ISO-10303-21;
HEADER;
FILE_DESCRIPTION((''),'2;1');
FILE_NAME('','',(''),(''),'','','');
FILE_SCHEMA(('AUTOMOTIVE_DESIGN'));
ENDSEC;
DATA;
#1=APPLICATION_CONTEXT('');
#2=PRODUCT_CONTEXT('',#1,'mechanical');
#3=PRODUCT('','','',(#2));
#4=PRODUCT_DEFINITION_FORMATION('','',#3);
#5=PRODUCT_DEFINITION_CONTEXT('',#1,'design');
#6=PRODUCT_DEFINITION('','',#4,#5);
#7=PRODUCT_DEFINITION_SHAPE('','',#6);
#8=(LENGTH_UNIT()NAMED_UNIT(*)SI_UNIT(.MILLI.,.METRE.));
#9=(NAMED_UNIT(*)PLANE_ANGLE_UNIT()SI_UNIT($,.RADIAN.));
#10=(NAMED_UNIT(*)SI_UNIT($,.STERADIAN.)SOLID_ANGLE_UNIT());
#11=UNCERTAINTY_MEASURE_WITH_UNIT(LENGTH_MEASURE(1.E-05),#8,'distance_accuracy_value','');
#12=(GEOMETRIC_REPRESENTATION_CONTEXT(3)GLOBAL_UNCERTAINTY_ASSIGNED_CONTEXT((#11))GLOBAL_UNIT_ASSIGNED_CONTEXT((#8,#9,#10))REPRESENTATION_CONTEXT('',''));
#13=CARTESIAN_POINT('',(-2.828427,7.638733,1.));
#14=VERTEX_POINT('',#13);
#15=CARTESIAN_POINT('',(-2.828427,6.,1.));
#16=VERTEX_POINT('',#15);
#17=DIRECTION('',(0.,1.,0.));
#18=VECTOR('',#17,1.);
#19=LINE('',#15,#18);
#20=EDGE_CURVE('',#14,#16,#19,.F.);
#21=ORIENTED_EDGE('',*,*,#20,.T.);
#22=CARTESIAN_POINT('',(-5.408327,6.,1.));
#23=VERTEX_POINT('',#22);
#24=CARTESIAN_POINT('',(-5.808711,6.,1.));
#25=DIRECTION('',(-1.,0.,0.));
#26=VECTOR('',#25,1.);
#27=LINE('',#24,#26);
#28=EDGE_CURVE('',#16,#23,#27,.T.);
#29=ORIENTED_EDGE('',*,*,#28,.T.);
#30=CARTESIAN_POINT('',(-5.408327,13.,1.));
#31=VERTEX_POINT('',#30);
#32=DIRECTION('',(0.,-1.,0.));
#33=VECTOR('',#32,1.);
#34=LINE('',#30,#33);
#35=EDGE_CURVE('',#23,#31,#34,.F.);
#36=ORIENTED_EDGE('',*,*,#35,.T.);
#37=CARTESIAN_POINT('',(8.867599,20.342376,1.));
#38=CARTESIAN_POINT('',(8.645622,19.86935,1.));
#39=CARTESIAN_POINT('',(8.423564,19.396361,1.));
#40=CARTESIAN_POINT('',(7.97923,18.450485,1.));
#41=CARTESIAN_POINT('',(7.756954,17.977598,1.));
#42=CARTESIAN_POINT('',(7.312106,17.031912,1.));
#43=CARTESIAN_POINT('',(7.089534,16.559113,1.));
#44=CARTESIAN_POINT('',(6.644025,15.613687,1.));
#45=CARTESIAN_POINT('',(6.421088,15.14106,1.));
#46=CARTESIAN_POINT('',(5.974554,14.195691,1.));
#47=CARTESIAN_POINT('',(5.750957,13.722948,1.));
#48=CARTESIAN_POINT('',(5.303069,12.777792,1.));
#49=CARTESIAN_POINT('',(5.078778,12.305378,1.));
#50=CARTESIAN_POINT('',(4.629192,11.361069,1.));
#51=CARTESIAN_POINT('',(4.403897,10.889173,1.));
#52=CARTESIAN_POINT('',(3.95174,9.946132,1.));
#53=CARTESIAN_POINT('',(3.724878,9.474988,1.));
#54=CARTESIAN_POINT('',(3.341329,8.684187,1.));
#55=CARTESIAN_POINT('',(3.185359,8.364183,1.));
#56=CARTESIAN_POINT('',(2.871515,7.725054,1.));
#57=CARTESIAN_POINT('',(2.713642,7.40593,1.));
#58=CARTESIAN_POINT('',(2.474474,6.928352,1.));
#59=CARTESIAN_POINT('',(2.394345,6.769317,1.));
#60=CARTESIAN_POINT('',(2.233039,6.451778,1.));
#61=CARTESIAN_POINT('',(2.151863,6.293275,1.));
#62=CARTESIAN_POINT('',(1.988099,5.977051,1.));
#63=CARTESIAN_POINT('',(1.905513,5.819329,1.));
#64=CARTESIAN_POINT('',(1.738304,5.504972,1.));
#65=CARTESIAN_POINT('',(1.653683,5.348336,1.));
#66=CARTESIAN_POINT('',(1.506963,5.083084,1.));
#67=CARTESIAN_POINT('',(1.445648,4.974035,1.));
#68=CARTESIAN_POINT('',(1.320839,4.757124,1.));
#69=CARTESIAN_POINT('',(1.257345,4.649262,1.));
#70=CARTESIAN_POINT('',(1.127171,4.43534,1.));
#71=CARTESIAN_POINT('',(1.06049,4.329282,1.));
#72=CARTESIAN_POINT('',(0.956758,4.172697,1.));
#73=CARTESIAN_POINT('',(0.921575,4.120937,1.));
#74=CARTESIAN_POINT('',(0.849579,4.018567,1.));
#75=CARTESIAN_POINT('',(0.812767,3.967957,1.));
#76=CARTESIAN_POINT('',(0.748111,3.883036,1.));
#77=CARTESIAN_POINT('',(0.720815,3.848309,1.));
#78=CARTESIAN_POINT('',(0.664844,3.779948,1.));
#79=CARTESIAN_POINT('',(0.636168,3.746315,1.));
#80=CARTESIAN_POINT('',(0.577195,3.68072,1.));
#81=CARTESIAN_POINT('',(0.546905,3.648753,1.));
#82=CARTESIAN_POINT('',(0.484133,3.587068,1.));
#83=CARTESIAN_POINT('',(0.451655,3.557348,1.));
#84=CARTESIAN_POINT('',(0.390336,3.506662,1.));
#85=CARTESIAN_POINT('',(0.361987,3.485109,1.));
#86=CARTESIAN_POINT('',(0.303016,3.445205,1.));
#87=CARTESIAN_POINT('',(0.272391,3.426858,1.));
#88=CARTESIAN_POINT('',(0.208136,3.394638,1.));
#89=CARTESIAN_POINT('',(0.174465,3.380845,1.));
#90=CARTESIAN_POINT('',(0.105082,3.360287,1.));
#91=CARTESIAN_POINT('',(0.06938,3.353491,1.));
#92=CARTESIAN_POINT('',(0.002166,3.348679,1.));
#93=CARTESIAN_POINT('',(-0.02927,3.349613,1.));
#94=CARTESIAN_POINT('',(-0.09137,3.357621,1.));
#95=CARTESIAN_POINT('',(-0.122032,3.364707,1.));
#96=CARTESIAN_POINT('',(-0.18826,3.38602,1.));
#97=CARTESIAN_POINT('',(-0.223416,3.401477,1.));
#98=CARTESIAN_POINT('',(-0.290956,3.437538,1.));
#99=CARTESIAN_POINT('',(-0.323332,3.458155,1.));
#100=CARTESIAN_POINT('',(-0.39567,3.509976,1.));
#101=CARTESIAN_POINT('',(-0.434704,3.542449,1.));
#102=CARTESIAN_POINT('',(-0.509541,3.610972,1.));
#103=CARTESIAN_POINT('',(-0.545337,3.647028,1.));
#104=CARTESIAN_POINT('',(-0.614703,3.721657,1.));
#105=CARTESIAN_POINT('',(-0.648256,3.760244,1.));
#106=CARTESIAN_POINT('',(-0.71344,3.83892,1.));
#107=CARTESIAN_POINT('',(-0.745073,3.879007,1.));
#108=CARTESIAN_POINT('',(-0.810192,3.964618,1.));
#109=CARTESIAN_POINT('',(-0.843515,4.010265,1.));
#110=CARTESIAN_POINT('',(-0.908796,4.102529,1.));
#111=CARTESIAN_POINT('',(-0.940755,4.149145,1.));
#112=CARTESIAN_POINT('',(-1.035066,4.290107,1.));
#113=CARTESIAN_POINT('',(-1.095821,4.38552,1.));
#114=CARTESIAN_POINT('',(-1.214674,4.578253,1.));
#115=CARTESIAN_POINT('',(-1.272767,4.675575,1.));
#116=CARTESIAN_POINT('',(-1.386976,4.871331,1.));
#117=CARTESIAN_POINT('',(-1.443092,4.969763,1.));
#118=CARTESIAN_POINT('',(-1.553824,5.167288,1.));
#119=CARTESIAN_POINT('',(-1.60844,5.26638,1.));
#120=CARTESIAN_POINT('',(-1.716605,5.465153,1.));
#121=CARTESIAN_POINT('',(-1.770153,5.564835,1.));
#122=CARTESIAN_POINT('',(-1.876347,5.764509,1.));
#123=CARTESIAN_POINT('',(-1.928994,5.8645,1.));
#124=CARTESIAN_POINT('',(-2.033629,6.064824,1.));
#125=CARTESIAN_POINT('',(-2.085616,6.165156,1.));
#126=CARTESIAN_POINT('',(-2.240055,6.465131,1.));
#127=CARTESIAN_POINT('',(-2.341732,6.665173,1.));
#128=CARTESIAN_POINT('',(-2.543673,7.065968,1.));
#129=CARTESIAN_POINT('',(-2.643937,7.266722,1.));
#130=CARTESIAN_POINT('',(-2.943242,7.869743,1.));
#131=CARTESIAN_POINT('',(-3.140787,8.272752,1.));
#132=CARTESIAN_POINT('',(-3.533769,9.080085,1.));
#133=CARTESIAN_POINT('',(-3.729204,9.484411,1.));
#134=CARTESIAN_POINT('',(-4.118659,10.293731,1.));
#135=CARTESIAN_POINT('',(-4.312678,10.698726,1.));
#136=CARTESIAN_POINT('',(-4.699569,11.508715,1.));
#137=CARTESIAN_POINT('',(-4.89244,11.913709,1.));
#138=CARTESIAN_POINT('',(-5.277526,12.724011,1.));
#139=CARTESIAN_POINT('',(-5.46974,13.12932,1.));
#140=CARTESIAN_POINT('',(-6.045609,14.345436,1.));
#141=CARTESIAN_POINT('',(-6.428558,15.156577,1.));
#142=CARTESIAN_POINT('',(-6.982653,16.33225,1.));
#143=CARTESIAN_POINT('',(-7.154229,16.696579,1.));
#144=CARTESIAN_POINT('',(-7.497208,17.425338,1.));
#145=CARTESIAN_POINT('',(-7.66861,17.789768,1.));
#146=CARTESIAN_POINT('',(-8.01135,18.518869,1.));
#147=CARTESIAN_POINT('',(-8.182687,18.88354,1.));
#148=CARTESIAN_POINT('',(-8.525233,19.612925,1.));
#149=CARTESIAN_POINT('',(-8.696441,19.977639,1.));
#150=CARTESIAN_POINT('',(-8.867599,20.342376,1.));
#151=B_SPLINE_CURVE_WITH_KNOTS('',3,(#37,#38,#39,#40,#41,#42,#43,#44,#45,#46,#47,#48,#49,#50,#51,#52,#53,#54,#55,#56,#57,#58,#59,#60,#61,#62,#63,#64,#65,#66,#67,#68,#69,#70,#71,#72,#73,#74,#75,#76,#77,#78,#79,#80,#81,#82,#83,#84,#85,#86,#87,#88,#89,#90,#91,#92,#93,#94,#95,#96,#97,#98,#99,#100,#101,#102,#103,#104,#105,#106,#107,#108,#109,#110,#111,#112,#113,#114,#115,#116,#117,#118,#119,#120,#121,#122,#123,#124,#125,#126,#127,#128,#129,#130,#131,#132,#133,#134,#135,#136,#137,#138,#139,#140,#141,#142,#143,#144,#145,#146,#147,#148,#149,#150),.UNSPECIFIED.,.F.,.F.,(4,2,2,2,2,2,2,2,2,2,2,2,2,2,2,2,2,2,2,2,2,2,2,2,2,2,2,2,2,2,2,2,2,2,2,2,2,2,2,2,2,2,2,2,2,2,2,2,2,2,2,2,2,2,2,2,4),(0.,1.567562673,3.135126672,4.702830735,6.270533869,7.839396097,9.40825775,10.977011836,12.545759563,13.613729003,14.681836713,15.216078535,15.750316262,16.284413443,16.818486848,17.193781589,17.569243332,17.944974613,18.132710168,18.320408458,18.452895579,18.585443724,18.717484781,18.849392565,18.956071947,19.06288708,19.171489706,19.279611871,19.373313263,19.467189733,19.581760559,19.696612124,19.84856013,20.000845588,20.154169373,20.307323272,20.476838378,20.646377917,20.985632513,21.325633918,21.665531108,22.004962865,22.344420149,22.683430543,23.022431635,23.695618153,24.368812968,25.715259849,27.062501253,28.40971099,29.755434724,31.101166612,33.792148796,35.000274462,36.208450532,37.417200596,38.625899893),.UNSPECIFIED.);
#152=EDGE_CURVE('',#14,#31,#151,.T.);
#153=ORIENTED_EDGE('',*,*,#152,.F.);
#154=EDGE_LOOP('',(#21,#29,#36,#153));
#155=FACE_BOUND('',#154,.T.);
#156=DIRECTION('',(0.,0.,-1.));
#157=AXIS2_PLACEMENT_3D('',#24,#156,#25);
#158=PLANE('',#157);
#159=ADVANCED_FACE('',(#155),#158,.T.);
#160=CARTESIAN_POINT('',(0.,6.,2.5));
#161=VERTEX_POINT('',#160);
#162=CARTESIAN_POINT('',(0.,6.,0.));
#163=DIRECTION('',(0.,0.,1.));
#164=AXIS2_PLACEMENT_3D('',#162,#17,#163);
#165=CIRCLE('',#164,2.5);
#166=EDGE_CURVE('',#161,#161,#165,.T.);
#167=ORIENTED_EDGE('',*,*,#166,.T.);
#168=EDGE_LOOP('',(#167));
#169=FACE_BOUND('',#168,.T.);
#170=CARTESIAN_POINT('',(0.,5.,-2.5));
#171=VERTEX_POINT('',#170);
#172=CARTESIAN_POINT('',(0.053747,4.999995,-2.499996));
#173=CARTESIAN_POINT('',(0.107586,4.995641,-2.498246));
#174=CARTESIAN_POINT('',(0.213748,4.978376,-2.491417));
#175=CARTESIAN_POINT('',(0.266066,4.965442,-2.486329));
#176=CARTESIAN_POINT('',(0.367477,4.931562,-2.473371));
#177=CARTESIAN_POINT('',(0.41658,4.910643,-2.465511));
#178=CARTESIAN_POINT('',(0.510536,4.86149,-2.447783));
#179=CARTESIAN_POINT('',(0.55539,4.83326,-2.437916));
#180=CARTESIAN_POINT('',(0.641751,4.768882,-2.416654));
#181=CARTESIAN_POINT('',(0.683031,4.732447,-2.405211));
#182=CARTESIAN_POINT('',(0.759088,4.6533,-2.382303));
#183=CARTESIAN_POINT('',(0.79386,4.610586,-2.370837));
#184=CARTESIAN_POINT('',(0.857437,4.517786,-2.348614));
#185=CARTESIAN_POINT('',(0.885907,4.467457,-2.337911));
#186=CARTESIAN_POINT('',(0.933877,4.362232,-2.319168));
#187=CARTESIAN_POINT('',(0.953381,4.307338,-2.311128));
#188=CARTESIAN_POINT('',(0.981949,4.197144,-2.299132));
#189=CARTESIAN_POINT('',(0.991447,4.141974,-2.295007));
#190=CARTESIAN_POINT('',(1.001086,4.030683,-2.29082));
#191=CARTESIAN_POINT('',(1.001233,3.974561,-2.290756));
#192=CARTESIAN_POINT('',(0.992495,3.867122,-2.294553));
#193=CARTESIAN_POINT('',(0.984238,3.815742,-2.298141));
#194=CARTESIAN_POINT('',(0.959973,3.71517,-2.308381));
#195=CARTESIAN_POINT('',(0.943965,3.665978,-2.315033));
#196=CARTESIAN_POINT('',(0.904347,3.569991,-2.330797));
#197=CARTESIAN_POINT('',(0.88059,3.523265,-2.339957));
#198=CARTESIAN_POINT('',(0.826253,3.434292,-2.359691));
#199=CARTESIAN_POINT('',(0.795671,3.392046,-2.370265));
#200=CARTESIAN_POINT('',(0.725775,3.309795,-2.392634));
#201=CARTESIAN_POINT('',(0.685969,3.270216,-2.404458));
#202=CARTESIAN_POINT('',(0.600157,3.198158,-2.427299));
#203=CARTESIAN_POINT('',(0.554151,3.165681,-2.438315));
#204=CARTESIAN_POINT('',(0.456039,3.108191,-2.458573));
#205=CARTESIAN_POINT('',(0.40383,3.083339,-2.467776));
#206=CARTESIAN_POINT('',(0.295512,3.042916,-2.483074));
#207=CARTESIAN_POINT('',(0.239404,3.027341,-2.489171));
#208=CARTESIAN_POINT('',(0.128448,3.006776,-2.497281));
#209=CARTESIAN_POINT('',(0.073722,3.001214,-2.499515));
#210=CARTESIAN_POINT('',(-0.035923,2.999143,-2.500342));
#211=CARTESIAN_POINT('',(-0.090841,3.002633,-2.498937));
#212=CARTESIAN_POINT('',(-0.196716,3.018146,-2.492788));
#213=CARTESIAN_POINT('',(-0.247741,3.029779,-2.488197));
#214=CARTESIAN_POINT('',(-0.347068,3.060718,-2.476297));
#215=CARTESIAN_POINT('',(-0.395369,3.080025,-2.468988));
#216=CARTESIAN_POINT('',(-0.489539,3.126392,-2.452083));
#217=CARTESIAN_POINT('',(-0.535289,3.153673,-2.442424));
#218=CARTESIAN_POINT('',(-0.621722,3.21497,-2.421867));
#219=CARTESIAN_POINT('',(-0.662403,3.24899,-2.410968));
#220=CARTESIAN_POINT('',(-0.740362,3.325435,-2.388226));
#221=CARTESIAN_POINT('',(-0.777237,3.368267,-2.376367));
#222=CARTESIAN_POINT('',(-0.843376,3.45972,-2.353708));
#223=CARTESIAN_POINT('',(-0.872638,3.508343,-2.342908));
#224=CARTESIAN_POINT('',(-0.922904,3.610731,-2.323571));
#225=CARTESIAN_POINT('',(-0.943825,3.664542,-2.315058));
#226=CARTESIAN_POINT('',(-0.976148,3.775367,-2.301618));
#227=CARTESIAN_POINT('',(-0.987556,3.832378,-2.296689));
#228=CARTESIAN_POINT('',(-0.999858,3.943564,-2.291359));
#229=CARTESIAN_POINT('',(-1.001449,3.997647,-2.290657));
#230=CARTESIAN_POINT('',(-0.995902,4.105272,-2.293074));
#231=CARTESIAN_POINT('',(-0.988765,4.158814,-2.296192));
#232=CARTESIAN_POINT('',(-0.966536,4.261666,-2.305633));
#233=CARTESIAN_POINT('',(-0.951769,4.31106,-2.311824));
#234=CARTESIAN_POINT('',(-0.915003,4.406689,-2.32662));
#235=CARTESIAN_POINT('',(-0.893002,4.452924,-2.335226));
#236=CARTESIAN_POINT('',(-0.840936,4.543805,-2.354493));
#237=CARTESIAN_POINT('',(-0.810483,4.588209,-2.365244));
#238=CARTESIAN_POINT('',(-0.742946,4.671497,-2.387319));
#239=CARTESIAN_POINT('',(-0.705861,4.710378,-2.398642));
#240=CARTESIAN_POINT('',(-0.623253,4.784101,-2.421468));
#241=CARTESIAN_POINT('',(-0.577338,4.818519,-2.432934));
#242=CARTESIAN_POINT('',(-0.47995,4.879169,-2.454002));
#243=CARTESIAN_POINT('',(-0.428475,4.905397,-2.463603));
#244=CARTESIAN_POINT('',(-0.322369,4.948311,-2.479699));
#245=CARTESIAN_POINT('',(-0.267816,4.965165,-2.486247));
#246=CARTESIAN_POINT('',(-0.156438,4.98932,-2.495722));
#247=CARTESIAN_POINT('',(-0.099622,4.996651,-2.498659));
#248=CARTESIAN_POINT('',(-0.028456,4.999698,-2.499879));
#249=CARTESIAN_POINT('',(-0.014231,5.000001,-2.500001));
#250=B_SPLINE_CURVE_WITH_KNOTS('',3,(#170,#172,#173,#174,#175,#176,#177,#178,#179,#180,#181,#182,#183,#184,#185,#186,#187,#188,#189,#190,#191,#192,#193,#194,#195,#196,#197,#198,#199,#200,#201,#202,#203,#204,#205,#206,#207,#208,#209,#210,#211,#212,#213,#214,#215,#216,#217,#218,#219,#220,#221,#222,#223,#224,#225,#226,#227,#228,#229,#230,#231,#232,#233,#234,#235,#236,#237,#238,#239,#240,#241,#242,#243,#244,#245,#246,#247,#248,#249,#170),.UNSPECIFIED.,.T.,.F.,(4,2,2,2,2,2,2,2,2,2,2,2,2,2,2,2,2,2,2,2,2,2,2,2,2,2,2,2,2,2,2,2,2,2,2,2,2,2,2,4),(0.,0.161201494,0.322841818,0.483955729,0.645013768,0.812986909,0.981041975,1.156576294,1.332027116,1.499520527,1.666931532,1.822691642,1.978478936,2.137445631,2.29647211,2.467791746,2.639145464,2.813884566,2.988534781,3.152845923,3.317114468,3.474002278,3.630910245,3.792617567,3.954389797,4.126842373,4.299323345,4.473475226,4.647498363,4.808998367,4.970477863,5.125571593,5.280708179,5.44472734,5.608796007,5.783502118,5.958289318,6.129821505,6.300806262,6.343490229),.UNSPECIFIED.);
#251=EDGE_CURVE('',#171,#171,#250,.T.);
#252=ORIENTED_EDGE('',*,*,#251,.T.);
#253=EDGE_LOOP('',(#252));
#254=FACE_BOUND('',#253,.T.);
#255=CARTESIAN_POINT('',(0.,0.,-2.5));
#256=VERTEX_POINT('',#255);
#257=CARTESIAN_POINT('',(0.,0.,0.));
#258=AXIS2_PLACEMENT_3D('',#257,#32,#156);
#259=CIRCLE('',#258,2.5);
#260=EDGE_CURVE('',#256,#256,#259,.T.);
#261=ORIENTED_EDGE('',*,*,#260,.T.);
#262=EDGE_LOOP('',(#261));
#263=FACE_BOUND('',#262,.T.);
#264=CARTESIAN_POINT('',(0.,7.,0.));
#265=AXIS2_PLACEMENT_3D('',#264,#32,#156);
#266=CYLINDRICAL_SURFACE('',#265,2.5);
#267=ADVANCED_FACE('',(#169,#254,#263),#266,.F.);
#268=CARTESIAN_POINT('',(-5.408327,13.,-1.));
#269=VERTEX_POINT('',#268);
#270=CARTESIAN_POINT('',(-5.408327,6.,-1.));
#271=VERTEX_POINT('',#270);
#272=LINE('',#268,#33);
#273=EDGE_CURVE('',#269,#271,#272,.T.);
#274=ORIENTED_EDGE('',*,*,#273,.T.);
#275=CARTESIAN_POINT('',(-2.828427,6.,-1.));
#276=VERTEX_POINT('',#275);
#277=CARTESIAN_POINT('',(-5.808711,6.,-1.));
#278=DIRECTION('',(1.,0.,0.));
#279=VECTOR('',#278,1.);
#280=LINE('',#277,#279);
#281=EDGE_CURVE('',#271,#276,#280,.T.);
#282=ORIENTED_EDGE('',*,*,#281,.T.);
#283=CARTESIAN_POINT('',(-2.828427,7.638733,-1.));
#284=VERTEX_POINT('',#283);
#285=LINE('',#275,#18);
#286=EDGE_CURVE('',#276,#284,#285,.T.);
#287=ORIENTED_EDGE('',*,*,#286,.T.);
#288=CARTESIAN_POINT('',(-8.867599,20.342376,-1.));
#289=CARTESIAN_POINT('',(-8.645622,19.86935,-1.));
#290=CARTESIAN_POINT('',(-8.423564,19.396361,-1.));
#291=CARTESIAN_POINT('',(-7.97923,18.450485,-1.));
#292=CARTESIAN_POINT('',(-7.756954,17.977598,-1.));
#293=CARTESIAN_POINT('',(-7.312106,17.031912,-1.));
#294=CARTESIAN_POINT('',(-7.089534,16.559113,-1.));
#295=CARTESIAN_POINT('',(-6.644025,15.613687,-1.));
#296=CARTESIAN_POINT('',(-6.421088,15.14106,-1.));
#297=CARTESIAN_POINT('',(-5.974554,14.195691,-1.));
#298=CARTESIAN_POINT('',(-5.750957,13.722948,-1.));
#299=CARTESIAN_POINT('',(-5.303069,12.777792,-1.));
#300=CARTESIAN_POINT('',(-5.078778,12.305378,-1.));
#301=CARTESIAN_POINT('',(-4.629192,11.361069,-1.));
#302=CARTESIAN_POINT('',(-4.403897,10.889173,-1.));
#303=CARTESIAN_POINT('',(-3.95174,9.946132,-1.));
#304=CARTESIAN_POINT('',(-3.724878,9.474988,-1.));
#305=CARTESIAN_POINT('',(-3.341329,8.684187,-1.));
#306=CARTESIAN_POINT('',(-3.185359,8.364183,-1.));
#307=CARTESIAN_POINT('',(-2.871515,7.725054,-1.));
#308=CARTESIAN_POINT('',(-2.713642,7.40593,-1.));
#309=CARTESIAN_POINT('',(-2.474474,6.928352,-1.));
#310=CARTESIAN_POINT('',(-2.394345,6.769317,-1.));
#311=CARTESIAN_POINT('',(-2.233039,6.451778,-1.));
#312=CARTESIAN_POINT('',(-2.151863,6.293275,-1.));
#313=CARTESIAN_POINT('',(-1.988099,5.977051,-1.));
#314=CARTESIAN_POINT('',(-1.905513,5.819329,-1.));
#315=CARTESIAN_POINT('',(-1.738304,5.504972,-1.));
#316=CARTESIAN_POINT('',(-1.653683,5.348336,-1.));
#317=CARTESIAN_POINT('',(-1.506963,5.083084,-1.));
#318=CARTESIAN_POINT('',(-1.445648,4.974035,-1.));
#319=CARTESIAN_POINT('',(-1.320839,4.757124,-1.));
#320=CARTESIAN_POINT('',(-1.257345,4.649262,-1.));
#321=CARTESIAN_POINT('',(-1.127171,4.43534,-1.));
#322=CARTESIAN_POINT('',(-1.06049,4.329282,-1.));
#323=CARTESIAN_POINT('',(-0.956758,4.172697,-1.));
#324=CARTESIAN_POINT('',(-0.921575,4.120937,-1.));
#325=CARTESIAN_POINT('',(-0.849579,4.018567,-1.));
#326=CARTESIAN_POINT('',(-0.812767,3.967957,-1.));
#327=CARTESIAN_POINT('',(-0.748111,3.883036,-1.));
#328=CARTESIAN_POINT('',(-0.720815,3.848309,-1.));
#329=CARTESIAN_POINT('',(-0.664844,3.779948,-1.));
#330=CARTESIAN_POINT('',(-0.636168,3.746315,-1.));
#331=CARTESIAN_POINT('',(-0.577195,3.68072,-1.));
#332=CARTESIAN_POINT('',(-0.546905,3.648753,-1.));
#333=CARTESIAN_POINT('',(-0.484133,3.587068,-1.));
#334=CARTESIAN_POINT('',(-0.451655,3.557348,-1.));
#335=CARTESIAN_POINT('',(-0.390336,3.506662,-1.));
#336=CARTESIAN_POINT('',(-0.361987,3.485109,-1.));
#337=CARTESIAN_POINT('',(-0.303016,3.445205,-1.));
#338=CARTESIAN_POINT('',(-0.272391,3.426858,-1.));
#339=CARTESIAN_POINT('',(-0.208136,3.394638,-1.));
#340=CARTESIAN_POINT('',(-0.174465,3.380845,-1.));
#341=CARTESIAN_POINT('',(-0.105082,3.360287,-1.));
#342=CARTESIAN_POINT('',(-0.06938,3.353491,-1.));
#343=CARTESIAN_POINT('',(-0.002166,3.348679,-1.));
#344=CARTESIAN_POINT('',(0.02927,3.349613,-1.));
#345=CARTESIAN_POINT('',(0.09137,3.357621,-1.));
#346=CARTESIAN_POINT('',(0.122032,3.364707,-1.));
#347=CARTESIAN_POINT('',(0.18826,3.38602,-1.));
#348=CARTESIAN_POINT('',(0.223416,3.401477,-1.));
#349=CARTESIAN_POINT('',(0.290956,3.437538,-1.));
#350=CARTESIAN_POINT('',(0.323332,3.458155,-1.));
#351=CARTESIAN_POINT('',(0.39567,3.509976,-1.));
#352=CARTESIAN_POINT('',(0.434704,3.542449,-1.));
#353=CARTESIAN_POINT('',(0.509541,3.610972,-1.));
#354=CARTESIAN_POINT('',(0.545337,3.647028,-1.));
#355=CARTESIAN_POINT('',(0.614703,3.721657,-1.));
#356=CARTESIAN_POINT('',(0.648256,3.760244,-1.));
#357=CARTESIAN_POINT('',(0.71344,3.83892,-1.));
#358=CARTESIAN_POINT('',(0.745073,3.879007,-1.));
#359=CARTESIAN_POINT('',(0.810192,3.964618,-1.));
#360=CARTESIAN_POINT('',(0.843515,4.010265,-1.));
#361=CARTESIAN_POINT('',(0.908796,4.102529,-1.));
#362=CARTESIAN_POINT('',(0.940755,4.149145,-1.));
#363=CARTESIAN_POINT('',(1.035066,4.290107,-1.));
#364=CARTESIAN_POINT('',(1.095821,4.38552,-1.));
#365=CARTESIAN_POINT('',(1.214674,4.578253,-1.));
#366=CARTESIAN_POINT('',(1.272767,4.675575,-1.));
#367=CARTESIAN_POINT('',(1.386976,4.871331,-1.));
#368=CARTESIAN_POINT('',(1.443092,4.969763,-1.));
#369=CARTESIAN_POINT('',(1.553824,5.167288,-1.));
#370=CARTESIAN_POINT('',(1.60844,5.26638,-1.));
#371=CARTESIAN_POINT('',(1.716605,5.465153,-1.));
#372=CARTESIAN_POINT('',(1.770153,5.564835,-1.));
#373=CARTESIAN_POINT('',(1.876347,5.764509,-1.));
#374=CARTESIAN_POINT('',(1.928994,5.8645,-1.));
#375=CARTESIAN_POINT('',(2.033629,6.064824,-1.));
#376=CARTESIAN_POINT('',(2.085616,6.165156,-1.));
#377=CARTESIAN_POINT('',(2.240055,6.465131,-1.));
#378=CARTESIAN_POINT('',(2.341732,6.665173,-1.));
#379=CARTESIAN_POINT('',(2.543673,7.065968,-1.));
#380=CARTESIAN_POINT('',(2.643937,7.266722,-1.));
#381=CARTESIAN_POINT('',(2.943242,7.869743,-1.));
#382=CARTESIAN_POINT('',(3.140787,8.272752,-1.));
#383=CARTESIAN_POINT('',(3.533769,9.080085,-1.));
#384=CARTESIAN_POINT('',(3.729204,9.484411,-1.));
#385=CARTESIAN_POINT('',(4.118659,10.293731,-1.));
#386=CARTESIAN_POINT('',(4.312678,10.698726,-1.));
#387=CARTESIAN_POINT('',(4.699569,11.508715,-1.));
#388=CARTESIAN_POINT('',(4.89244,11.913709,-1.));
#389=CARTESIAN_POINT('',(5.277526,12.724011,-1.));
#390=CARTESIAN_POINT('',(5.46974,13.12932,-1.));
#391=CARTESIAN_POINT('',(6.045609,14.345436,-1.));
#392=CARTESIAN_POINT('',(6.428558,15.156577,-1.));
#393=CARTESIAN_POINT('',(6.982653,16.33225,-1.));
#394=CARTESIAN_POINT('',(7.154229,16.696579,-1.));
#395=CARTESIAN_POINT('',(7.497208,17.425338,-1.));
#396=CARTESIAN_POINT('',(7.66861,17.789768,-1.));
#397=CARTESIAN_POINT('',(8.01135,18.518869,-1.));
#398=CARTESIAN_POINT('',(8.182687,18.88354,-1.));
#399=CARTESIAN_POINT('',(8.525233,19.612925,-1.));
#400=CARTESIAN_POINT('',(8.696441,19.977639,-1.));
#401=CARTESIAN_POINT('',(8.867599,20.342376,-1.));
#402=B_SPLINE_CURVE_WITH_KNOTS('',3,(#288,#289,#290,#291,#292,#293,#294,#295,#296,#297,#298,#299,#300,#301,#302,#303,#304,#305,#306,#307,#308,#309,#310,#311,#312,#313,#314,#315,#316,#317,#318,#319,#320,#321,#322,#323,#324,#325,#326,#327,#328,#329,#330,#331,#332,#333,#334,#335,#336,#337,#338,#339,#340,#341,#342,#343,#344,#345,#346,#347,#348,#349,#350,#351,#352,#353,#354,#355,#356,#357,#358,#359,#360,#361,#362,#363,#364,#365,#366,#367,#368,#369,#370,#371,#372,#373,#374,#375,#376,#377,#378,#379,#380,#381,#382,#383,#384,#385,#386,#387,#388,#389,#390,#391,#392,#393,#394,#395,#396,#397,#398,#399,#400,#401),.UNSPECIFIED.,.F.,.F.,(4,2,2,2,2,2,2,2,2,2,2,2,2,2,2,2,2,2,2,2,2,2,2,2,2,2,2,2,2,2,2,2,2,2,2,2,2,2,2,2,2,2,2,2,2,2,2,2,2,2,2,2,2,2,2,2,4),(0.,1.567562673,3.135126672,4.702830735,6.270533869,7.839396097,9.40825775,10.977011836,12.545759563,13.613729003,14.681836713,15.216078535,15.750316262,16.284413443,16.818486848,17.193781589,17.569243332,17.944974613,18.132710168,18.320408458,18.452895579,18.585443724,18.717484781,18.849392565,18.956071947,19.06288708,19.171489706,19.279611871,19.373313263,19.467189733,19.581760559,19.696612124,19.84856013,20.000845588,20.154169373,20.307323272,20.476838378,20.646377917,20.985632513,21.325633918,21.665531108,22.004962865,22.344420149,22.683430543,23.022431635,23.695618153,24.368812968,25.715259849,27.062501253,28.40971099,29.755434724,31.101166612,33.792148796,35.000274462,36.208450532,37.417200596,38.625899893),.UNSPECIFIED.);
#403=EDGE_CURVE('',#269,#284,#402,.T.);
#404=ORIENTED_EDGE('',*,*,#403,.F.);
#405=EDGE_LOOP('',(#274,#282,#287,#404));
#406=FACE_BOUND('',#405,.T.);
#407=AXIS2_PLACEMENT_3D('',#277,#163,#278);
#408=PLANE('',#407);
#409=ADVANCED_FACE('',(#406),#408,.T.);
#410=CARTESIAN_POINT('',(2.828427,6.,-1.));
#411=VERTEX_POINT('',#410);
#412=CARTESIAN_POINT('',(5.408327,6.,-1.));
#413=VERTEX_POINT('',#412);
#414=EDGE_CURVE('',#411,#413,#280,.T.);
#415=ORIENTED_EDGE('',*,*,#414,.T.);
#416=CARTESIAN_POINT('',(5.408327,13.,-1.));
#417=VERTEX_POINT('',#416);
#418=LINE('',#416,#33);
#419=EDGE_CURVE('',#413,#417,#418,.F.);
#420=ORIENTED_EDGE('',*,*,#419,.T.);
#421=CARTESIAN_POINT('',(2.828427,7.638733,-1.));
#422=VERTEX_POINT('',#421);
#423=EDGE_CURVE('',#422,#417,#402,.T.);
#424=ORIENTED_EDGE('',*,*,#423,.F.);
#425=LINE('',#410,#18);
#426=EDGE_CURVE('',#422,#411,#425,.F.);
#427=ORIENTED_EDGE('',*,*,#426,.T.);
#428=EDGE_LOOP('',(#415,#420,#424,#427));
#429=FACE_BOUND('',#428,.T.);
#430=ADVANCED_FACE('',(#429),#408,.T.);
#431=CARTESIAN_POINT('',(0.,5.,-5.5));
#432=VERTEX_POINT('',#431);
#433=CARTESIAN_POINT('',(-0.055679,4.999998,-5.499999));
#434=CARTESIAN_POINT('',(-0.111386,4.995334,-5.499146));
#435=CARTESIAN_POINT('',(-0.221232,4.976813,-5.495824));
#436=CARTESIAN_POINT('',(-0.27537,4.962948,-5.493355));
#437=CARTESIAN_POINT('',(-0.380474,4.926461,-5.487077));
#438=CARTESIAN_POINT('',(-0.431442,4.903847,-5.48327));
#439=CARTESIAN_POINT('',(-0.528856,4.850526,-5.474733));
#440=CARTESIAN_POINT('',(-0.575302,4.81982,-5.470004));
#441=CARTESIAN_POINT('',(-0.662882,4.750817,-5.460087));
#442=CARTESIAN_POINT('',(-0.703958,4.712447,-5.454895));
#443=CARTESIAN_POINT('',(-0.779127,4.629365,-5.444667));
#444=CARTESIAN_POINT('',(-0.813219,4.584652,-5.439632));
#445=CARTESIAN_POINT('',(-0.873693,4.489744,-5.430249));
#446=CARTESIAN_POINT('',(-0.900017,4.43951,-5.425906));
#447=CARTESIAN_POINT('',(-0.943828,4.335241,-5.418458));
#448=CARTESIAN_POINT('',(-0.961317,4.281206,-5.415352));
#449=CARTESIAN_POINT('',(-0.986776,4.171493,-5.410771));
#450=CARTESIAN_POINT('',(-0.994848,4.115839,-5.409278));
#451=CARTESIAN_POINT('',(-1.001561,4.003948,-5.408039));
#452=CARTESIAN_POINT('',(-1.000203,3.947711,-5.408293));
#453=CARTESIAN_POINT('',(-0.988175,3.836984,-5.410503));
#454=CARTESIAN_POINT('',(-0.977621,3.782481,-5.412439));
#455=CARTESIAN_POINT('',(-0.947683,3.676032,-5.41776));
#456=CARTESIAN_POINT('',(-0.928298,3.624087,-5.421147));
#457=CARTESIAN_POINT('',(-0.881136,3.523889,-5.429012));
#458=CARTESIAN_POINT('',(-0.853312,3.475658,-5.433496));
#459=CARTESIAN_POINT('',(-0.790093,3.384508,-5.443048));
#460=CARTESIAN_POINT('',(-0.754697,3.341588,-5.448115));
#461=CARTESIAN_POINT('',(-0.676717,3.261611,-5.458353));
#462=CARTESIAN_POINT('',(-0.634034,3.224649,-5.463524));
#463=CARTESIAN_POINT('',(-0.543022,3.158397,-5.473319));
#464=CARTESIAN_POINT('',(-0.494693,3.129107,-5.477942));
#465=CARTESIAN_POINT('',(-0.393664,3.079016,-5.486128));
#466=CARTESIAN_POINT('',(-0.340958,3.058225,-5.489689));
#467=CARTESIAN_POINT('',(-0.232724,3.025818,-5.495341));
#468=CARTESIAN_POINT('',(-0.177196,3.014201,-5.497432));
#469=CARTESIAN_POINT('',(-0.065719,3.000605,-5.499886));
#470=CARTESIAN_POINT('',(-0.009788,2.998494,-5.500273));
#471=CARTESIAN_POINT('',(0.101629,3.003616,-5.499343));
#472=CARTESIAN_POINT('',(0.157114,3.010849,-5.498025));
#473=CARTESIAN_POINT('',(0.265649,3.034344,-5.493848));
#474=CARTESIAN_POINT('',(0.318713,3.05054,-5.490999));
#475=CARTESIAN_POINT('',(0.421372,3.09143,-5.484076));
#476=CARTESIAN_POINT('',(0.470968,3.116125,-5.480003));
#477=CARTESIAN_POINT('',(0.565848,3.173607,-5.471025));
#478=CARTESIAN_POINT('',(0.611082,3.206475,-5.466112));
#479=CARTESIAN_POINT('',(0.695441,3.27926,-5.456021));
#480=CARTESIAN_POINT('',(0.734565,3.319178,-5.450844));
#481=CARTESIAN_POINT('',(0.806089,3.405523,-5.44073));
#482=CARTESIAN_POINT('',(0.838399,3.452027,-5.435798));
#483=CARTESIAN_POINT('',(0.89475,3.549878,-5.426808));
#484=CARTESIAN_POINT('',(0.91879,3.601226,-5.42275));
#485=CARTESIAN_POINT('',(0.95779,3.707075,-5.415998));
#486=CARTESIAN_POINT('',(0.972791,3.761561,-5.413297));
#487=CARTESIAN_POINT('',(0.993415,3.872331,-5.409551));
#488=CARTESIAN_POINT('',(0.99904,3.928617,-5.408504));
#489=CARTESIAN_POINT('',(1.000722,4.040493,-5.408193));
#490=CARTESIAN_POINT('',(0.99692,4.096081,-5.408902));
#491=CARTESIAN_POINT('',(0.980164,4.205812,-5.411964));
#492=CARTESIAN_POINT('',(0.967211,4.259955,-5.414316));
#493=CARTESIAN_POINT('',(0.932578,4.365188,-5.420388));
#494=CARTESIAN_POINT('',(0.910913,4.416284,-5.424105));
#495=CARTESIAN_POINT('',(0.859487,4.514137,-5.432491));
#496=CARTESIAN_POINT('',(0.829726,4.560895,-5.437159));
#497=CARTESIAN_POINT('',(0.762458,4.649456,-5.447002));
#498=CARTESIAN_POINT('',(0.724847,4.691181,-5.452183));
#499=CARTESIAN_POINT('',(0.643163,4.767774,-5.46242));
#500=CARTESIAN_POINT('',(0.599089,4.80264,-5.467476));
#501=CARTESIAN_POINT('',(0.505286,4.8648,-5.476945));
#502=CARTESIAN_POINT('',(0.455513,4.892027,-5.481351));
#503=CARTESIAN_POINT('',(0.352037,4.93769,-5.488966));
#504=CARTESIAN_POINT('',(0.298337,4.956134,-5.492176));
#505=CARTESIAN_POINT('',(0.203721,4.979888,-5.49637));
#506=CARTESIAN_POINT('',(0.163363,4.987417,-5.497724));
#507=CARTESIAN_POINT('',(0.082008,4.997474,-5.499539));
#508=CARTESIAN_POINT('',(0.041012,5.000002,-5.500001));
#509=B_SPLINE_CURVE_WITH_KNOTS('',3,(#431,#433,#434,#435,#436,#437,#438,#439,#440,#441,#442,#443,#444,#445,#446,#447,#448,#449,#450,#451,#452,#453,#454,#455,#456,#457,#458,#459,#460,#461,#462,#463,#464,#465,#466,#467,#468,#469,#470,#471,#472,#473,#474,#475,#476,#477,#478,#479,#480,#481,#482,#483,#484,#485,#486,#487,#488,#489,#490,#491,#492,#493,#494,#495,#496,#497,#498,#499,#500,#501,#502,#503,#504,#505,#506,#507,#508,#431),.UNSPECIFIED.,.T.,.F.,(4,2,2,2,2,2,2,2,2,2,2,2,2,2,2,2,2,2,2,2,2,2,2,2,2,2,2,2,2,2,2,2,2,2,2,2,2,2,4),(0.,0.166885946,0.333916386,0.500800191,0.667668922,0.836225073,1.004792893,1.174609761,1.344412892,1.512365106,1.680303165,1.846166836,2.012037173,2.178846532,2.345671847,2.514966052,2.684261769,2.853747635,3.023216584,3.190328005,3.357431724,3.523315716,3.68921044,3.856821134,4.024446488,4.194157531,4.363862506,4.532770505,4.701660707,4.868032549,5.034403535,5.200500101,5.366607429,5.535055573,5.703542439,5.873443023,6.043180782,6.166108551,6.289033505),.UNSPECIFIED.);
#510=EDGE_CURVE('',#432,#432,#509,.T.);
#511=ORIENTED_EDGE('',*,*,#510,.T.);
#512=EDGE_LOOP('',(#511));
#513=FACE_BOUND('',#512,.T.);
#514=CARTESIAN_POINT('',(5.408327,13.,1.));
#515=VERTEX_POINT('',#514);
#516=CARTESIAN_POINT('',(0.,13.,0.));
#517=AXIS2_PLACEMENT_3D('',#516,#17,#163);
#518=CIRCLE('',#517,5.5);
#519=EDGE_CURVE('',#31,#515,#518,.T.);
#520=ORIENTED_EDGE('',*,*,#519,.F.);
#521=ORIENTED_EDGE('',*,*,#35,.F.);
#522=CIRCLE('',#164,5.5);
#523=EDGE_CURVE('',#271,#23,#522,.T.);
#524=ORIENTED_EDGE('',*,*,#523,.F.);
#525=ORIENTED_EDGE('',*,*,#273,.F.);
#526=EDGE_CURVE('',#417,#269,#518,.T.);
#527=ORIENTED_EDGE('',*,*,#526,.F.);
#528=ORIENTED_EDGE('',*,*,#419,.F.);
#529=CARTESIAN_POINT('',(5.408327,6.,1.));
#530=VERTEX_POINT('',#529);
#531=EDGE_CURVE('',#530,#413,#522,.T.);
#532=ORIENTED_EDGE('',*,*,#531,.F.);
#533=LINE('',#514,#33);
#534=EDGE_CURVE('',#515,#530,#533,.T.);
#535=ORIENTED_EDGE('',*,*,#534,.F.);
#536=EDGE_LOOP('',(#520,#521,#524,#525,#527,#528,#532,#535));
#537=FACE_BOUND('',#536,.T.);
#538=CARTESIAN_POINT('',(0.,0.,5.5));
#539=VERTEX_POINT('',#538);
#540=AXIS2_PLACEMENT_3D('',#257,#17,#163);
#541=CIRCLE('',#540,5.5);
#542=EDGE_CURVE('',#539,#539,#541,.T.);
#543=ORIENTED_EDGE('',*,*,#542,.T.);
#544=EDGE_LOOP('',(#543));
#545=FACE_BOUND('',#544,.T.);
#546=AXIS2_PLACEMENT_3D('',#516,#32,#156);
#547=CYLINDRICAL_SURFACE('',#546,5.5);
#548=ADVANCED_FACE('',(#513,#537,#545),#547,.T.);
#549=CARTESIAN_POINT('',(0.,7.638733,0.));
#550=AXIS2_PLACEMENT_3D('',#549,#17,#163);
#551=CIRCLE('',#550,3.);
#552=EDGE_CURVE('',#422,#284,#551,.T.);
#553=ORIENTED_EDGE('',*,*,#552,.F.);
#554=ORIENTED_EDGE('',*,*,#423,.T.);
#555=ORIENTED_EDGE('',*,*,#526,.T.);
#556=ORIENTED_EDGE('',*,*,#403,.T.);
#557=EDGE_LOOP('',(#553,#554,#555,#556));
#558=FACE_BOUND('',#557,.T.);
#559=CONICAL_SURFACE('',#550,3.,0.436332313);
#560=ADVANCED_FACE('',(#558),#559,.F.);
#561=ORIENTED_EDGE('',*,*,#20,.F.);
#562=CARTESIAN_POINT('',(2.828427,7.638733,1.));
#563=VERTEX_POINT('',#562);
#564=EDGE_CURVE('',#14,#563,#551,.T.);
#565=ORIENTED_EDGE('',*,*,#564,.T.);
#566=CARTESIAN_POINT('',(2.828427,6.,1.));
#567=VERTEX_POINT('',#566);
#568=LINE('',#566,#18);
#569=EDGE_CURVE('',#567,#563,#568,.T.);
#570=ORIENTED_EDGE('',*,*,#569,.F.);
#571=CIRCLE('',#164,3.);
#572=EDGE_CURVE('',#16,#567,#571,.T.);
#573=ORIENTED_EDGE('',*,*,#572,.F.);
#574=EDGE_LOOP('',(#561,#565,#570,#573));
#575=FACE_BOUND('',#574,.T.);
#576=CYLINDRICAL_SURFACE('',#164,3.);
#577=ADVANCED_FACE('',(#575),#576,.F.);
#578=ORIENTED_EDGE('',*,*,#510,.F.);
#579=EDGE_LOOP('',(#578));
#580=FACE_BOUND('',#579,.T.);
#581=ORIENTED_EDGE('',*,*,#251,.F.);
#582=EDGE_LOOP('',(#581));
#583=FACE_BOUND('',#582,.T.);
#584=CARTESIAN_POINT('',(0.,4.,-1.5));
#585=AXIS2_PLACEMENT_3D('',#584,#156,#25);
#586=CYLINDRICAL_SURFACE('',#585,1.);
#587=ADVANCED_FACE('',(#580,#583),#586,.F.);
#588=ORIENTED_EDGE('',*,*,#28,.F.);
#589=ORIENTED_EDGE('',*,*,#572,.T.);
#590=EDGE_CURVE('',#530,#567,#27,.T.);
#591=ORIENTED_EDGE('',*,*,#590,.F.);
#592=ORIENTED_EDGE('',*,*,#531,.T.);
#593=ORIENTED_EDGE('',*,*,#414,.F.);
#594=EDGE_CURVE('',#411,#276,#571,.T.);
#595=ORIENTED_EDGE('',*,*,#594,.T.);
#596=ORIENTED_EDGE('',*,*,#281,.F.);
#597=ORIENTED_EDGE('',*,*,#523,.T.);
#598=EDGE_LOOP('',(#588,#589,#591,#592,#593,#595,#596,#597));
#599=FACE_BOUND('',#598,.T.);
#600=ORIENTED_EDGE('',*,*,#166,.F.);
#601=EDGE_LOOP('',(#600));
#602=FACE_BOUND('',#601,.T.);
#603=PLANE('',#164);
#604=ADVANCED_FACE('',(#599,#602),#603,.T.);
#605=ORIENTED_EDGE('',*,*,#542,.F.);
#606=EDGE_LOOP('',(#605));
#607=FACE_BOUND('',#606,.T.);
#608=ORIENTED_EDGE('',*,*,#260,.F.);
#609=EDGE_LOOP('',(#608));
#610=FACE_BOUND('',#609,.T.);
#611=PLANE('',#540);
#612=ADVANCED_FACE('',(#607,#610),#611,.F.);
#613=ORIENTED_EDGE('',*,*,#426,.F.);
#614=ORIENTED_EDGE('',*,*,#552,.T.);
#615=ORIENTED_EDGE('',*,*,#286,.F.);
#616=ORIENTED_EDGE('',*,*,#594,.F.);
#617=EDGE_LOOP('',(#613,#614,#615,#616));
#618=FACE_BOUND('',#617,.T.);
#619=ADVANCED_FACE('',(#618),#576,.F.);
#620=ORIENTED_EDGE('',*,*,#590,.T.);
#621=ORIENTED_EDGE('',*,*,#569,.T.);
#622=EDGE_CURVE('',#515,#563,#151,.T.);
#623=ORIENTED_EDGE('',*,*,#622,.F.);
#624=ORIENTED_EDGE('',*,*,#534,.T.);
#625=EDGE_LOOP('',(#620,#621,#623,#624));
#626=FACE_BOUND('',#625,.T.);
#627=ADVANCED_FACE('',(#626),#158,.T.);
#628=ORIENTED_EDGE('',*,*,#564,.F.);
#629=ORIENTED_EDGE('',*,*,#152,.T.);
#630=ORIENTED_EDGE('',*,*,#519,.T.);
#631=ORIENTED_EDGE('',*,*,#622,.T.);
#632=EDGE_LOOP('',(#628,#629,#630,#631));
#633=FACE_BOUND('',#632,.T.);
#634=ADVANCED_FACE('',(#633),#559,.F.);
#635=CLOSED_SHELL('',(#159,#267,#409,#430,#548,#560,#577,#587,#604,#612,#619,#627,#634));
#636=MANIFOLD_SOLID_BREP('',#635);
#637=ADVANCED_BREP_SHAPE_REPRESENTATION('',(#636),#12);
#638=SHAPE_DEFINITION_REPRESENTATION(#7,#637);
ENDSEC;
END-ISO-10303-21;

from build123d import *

# Parameters (mm, degrees)
SKETCH1_R           = 5.5
BOSS_EXTRUDE1_DEPTH = 13
SKETCH2_R           = 3
CUT_EXTRUDE1_DEPTH  = 7
CHAMFER1_SIZE       = 2.5
CHAMFER1_SIZE_2     = 5.361267301
SKETCH3_W           = 11.617421712
SKETCH3_H           = 2
CUT_EXTRUDE2_DEPTH  = 7
SKETCH4_R           = 2.5
CUT_EXTRUDE3_DEPTH  = 7
SKETCH5_R           = 1
CUT_EXTRUDE5_DEPTH  = 4


with BuildPart() as part:
    # Sketch1 → Boss-Extrude1 (new body)
    with BuildSketch(Plane(origin=(0, 0, 0), x_dir=(1, 0, 0), z_dir=(0, 1, 0))):
        with Locations(Location((0, 0, 0), (0, 0, 90))):
            Circle(SKETCH1_R)
    extrude(amount=BOSS_EXTRUDE1_DEPTH)

    # Sketch2 → Cut-Extrude1 (cut)
    with BuildSketch(Plane(origin=(0, 13, 0), x_dir=(1, 0, 0), z_dir=(0, 1, 0))):
        with Locations(Location((0, 0, 0), (0, 0, 270))):
            Circle(SKETCH2_R)
    extrude(amount=-CUT_EXTRUDE1_DEPTH, mode=Mode.SUBTRACT)

    # Chamfer1
    # the kernel refuses this chamfer: 5.361267301, 2.5 mm, written as the material it takes off along each edge
    with BuildSketch(Plane(origin=(0, 13, 0), x_dir=(0, 0, 1), z_dir=(-1, 0, 0))) as chamfer1_piece_1:
        Polygon((3 + CHAMFER1_SIZE, 0), (3, -CHAMFER1_SIZE_2), (3, 0), align=None)
    revolve(axis=Axis((0, 13, 0), (0, 1, 0)), mode=Mode.SUBTRACT)

    # Sketch3 → Cut-Extrude2 (cut)
    with BuildSketch(Plane(origin=(0, 13, 0), x_dir=(-1, 0, 0), z_dir=(0, -1, 0))):
        Rectangle(SKETCH3_W, SKETCH3_H)
    extrude(amount=CUT_EXTRUDE2_DEPTH, mode=Mode.SUBTRACT)

    # Sketch4 → Cut-Extrude3 (cut)
    with BuildSketch(Plane.XZ):
        with Locations(Location((0, 0, 0), (0, 0, 270))):
            Circle(SKETCH4_R)
    extrude(amount=-CUT_EXTRUDE3_DEPTH, mode=Mode.SUBTRACT)

    # Sketch5 → Cut-Extrude5 (cut)
    with BuildSketch(Plane(origin=(0, 0, -5.5), x_dir=(-1, 0, 0), z_dir=(0, 0, -1))):
        with Locations(Location((0, 4, 0), (0, 0, 90))):
            Circle(SKETCH5_R)
    extrude(amount=-CUT_EXTRUDE5_DEPTH, mode=Mode.SUBTRACT)


solid = part.part
